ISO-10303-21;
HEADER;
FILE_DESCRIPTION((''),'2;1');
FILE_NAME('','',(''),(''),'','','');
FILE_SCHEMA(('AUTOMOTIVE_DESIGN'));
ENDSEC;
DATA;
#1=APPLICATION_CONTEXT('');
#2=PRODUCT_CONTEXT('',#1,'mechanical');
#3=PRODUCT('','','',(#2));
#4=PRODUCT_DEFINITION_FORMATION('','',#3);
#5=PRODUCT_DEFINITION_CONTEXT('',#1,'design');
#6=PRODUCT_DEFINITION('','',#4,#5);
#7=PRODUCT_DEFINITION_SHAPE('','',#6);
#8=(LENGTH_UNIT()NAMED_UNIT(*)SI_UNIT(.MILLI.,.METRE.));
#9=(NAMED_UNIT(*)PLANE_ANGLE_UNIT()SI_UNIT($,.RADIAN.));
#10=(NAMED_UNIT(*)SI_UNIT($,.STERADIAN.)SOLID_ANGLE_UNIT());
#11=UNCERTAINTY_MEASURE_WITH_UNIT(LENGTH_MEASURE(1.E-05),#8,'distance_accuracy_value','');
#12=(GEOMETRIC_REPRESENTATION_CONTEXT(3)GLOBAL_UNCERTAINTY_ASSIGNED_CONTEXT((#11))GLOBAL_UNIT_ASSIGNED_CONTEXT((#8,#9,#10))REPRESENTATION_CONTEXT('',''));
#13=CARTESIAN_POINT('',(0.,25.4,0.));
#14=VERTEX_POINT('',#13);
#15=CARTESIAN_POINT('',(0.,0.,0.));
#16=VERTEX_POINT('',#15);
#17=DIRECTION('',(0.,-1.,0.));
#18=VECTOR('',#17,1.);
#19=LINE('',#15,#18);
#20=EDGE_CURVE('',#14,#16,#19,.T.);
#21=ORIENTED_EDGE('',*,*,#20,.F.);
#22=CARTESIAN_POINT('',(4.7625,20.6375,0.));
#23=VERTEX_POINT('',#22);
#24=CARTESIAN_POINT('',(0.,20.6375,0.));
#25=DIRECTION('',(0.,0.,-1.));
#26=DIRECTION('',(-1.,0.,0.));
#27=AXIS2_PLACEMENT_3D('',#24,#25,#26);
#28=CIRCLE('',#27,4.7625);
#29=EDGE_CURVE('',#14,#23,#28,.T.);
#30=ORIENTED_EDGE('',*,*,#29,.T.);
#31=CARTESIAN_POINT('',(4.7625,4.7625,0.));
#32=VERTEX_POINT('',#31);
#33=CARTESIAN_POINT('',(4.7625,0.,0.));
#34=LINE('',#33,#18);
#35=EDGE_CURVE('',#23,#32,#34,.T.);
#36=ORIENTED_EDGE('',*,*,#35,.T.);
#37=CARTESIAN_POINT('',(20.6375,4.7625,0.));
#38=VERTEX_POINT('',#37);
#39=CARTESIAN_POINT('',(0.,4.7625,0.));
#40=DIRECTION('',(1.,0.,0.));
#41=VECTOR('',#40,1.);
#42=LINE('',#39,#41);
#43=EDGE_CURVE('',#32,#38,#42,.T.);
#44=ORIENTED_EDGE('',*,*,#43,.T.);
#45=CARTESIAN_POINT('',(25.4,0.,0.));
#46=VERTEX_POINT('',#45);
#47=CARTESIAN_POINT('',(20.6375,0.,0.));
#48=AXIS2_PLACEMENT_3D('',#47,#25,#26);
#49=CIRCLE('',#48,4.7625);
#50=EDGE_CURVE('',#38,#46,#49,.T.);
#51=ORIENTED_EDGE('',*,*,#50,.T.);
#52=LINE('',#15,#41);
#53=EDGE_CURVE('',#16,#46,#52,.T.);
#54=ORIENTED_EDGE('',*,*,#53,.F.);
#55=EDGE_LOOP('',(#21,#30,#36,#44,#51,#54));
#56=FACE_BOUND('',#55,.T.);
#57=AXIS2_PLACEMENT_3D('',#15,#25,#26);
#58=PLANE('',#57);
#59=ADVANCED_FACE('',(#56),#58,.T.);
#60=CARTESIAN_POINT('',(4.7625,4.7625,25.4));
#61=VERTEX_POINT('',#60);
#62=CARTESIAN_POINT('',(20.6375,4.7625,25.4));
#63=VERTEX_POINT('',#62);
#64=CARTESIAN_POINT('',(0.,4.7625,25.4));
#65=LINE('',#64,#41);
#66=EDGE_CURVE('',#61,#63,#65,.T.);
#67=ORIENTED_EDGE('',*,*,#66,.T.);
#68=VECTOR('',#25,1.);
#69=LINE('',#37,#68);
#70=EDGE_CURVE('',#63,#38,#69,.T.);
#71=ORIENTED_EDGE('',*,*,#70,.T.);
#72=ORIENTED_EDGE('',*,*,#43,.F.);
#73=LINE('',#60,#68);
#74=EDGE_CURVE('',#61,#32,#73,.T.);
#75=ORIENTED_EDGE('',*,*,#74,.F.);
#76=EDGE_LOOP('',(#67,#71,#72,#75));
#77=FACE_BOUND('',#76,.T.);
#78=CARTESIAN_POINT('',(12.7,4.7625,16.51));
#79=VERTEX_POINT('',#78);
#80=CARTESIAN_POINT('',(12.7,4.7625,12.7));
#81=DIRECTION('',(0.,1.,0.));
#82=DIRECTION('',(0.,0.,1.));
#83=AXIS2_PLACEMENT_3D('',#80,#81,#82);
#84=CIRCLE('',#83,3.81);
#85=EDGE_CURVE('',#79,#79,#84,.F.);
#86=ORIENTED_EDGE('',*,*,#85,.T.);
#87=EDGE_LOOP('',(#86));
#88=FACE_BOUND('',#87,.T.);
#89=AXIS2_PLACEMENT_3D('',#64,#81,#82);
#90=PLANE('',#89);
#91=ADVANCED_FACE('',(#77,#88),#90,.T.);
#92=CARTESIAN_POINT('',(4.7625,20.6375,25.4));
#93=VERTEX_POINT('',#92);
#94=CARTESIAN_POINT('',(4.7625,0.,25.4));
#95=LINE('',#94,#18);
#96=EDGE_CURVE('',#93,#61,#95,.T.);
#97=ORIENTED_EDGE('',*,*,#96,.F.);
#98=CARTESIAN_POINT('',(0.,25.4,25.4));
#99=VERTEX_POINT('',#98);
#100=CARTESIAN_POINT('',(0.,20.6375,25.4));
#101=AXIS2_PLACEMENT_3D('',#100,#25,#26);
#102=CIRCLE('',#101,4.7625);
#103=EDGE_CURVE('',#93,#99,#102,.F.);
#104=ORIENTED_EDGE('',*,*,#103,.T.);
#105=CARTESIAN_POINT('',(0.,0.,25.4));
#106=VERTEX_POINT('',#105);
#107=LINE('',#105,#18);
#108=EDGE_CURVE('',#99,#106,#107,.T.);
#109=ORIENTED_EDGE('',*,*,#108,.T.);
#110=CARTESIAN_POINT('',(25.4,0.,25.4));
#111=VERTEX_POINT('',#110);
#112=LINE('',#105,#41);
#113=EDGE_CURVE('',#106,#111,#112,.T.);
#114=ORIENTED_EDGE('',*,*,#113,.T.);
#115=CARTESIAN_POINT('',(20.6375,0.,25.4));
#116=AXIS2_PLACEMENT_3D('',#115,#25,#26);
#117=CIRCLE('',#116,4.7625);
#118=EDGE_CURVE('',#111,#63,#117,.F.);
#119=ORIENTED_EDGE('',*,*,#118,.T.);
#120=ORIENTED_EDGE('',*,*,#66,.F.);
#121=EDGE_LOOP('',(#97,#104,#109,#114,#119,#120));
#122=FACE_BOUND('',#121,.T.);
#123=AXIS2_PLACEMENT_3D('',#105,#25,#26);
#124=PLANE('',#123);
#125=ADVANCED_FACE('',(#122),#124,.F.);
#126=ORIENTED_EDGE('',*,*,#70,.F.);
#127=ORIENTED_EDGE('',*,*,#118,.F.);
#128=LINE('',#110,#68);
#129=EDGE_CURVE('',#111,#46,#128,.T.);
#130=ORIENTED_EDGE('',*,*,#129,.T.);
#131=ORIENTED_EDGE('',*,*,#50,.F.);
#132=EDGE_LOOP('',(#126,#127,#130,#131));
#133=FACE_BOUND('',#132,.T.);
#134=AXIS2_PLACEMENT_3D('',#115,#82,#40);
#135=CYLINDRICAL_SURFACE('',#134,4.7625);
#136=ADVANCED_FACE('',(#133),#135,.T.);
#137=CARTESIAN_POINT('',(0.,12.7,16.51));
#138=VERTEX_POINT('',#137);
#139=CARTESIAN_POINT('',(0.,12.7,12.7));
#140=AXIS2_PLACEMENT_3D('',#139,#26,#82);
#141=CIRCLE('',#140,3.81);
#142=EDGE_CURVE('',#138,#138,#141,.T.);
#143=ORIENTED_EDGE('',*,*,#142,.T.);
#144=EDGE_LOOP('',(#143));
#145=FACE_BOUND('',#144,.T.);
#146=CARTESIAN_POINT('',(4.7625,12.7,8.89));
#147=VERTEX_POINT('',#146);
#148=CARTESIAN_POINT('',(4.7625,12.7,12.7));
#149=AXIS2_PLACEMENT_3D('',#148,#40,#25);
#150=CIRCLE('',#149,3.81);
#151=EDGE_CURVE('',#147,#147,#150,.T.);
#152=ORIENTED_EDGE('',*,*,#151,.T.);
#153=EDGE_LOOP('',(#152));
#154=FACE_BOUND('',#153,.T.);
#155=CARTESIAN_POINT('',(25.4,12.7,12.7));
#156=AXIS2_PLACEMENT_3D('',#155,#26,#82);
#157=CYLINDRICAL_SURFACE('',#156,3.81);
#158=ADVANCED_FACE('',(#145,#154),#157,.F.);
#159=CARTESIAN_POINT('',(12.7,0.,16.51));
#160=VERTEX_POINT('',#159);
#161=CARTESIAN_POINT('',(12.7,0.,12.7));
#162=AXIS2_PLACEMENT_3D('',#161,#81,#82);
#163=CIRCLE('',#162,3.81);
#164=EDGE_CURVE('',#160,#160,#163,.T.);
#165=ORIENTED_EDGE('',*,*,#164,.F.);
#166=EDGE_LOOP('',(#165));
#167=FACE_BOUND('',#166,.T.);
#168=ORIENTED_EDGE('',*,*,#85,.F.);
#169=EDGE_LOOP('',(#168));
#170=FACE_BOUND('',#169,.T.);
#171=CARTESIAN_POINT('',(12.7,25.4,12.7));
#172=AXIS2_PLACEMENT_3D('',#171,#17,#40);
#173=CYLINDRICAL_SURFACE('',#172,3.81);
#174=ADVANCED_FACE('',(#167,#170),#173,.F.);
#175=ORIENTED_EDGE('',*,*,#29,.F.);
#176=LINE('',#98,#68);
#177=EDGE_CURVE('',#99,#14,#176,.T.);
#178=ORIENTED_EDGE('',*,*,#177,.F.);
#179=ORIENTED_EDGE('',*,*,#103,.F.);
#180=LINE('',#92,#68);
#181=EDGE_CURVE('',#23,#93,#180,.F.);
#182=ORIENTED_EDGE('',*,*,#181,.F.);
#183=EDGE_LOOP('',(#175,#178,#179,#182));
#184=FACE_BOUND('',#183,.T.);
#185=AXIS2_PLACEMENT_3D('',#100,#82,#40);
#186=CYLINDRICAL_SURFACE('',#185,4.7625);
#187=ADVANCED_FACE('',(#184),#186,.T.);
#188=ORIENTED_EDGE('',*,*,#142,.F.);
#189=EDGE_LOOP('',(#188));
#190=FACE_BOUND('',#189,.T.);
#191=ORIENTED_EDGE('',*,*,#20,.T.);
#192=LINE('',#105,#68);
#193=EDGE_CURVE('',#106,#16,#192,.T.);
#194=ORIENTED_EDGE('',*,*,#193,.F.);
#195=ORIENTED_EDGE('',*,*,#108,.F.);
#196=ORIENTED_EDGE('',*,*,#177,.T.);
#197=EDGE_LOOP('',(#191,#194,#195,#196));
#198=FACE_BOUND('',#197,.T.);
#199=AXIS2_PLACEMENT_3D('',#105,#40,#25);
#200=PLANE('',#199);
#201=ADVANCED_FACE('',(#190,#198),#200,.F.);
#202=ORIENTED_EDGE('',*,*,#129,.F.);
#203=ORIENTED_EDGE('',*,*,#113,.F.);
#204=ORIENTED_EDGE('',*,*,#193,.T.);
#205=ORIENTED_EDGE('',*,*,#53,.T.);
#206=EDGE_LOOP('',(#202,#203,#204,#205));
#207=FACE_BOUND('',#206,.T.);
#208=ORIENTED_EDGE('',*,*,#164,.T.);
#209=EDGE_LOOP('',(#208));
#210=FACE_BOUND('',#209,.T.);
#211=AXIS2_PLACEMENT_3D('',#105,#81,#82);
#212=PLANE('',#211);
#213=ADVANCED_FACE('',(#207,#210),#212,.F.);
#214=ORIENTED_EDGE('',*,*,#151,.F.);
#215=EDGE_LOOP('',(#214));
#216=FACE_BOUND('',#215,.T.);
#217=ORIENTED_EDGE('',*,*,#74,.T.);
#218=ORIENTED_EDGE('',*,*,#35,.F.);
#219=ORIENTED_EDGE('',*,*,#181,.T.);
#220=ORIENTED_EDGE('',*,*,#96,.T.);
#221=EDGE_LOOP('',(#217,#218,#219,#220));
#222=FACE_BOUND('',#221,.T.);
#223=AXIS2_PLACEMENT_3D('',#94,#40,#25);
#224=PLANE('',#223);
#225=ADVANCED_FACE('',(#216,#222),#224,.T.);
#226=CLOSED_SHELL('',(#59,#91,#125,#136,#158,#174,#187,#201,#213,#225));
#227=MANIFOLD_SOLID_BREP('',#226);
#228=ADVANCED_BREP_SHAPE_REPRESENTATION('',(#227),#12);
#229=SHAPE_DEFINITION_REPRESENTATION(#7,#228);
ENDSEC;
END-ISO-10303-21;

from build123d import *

# Parameters (mm, degrees)
SKETCH2_W           = 25.4
SKETCH2_H           = 25.4
BOSS_EXTRUDE1_DEPTH = 25.4
SHELL1_T            = -4.7625
FILLET1_R           = 4.7625
SKETCH3_R           = 3.81
CUT_EXTRUDE1_DEPTH  = 25.4


with BuildPart() as part:
    # Sketch2 → Boss-Extrude1 (new body)
    with BuildSketch(Plane.XY):
        with Locations((12.7, 12.7)):
            Rectangle(SKETCH2_W, SKETCH2_H)
    extrude(amount=BOSS_EXTRUDE1_DEPTH)

    # Shell1
    shell1_openings = [part.faces().sort_by_distance(p)[0] for p in [
        (12.7, 12.7, 25.4),
        (12.7, 12.7, 0),
        (12.7, 25.4, 12.7),
        (25.4, 12.7, 12.7),
    ]]
    offset(amount=SHELL1_T, openings=shell1_openings, kind=Kind.INTERSECTION)

    # Fillet1
    fillet1_edges = [part.edges().sort_by_distance(p)[0] for p in [
        (25.4, 4.7625, 12.7),
        (4.7625, 25.4, 12.7),
    ]]
    fillet(fillet1_edges, radius=FILLET1_R - 0.0001)  # a hair under: the kernel refuses the full size

    # Sketch3 → Cut-Extrude1 (cut)
    with BuildSketch(Plane.ZY):
        with Locations((12.7, 12.7)):
            Circle(SKETCH3_R)
    cut_extrude1 = extrude(amount=-CUT_EXTRUDE1_DEPTH, mode=Mode.SUBTRACT)

    # Mirror1: Cut-Extrude1 across plane
    add(cut_extrude1.mirror(Plane(origin=(0, 0, 0), x_dir=(0, 0, 1), z_dir=(-0.7071067811865475, 0.7071067811865477, 0))), mode=Mode.SUBTRACT)


solid = part.part
